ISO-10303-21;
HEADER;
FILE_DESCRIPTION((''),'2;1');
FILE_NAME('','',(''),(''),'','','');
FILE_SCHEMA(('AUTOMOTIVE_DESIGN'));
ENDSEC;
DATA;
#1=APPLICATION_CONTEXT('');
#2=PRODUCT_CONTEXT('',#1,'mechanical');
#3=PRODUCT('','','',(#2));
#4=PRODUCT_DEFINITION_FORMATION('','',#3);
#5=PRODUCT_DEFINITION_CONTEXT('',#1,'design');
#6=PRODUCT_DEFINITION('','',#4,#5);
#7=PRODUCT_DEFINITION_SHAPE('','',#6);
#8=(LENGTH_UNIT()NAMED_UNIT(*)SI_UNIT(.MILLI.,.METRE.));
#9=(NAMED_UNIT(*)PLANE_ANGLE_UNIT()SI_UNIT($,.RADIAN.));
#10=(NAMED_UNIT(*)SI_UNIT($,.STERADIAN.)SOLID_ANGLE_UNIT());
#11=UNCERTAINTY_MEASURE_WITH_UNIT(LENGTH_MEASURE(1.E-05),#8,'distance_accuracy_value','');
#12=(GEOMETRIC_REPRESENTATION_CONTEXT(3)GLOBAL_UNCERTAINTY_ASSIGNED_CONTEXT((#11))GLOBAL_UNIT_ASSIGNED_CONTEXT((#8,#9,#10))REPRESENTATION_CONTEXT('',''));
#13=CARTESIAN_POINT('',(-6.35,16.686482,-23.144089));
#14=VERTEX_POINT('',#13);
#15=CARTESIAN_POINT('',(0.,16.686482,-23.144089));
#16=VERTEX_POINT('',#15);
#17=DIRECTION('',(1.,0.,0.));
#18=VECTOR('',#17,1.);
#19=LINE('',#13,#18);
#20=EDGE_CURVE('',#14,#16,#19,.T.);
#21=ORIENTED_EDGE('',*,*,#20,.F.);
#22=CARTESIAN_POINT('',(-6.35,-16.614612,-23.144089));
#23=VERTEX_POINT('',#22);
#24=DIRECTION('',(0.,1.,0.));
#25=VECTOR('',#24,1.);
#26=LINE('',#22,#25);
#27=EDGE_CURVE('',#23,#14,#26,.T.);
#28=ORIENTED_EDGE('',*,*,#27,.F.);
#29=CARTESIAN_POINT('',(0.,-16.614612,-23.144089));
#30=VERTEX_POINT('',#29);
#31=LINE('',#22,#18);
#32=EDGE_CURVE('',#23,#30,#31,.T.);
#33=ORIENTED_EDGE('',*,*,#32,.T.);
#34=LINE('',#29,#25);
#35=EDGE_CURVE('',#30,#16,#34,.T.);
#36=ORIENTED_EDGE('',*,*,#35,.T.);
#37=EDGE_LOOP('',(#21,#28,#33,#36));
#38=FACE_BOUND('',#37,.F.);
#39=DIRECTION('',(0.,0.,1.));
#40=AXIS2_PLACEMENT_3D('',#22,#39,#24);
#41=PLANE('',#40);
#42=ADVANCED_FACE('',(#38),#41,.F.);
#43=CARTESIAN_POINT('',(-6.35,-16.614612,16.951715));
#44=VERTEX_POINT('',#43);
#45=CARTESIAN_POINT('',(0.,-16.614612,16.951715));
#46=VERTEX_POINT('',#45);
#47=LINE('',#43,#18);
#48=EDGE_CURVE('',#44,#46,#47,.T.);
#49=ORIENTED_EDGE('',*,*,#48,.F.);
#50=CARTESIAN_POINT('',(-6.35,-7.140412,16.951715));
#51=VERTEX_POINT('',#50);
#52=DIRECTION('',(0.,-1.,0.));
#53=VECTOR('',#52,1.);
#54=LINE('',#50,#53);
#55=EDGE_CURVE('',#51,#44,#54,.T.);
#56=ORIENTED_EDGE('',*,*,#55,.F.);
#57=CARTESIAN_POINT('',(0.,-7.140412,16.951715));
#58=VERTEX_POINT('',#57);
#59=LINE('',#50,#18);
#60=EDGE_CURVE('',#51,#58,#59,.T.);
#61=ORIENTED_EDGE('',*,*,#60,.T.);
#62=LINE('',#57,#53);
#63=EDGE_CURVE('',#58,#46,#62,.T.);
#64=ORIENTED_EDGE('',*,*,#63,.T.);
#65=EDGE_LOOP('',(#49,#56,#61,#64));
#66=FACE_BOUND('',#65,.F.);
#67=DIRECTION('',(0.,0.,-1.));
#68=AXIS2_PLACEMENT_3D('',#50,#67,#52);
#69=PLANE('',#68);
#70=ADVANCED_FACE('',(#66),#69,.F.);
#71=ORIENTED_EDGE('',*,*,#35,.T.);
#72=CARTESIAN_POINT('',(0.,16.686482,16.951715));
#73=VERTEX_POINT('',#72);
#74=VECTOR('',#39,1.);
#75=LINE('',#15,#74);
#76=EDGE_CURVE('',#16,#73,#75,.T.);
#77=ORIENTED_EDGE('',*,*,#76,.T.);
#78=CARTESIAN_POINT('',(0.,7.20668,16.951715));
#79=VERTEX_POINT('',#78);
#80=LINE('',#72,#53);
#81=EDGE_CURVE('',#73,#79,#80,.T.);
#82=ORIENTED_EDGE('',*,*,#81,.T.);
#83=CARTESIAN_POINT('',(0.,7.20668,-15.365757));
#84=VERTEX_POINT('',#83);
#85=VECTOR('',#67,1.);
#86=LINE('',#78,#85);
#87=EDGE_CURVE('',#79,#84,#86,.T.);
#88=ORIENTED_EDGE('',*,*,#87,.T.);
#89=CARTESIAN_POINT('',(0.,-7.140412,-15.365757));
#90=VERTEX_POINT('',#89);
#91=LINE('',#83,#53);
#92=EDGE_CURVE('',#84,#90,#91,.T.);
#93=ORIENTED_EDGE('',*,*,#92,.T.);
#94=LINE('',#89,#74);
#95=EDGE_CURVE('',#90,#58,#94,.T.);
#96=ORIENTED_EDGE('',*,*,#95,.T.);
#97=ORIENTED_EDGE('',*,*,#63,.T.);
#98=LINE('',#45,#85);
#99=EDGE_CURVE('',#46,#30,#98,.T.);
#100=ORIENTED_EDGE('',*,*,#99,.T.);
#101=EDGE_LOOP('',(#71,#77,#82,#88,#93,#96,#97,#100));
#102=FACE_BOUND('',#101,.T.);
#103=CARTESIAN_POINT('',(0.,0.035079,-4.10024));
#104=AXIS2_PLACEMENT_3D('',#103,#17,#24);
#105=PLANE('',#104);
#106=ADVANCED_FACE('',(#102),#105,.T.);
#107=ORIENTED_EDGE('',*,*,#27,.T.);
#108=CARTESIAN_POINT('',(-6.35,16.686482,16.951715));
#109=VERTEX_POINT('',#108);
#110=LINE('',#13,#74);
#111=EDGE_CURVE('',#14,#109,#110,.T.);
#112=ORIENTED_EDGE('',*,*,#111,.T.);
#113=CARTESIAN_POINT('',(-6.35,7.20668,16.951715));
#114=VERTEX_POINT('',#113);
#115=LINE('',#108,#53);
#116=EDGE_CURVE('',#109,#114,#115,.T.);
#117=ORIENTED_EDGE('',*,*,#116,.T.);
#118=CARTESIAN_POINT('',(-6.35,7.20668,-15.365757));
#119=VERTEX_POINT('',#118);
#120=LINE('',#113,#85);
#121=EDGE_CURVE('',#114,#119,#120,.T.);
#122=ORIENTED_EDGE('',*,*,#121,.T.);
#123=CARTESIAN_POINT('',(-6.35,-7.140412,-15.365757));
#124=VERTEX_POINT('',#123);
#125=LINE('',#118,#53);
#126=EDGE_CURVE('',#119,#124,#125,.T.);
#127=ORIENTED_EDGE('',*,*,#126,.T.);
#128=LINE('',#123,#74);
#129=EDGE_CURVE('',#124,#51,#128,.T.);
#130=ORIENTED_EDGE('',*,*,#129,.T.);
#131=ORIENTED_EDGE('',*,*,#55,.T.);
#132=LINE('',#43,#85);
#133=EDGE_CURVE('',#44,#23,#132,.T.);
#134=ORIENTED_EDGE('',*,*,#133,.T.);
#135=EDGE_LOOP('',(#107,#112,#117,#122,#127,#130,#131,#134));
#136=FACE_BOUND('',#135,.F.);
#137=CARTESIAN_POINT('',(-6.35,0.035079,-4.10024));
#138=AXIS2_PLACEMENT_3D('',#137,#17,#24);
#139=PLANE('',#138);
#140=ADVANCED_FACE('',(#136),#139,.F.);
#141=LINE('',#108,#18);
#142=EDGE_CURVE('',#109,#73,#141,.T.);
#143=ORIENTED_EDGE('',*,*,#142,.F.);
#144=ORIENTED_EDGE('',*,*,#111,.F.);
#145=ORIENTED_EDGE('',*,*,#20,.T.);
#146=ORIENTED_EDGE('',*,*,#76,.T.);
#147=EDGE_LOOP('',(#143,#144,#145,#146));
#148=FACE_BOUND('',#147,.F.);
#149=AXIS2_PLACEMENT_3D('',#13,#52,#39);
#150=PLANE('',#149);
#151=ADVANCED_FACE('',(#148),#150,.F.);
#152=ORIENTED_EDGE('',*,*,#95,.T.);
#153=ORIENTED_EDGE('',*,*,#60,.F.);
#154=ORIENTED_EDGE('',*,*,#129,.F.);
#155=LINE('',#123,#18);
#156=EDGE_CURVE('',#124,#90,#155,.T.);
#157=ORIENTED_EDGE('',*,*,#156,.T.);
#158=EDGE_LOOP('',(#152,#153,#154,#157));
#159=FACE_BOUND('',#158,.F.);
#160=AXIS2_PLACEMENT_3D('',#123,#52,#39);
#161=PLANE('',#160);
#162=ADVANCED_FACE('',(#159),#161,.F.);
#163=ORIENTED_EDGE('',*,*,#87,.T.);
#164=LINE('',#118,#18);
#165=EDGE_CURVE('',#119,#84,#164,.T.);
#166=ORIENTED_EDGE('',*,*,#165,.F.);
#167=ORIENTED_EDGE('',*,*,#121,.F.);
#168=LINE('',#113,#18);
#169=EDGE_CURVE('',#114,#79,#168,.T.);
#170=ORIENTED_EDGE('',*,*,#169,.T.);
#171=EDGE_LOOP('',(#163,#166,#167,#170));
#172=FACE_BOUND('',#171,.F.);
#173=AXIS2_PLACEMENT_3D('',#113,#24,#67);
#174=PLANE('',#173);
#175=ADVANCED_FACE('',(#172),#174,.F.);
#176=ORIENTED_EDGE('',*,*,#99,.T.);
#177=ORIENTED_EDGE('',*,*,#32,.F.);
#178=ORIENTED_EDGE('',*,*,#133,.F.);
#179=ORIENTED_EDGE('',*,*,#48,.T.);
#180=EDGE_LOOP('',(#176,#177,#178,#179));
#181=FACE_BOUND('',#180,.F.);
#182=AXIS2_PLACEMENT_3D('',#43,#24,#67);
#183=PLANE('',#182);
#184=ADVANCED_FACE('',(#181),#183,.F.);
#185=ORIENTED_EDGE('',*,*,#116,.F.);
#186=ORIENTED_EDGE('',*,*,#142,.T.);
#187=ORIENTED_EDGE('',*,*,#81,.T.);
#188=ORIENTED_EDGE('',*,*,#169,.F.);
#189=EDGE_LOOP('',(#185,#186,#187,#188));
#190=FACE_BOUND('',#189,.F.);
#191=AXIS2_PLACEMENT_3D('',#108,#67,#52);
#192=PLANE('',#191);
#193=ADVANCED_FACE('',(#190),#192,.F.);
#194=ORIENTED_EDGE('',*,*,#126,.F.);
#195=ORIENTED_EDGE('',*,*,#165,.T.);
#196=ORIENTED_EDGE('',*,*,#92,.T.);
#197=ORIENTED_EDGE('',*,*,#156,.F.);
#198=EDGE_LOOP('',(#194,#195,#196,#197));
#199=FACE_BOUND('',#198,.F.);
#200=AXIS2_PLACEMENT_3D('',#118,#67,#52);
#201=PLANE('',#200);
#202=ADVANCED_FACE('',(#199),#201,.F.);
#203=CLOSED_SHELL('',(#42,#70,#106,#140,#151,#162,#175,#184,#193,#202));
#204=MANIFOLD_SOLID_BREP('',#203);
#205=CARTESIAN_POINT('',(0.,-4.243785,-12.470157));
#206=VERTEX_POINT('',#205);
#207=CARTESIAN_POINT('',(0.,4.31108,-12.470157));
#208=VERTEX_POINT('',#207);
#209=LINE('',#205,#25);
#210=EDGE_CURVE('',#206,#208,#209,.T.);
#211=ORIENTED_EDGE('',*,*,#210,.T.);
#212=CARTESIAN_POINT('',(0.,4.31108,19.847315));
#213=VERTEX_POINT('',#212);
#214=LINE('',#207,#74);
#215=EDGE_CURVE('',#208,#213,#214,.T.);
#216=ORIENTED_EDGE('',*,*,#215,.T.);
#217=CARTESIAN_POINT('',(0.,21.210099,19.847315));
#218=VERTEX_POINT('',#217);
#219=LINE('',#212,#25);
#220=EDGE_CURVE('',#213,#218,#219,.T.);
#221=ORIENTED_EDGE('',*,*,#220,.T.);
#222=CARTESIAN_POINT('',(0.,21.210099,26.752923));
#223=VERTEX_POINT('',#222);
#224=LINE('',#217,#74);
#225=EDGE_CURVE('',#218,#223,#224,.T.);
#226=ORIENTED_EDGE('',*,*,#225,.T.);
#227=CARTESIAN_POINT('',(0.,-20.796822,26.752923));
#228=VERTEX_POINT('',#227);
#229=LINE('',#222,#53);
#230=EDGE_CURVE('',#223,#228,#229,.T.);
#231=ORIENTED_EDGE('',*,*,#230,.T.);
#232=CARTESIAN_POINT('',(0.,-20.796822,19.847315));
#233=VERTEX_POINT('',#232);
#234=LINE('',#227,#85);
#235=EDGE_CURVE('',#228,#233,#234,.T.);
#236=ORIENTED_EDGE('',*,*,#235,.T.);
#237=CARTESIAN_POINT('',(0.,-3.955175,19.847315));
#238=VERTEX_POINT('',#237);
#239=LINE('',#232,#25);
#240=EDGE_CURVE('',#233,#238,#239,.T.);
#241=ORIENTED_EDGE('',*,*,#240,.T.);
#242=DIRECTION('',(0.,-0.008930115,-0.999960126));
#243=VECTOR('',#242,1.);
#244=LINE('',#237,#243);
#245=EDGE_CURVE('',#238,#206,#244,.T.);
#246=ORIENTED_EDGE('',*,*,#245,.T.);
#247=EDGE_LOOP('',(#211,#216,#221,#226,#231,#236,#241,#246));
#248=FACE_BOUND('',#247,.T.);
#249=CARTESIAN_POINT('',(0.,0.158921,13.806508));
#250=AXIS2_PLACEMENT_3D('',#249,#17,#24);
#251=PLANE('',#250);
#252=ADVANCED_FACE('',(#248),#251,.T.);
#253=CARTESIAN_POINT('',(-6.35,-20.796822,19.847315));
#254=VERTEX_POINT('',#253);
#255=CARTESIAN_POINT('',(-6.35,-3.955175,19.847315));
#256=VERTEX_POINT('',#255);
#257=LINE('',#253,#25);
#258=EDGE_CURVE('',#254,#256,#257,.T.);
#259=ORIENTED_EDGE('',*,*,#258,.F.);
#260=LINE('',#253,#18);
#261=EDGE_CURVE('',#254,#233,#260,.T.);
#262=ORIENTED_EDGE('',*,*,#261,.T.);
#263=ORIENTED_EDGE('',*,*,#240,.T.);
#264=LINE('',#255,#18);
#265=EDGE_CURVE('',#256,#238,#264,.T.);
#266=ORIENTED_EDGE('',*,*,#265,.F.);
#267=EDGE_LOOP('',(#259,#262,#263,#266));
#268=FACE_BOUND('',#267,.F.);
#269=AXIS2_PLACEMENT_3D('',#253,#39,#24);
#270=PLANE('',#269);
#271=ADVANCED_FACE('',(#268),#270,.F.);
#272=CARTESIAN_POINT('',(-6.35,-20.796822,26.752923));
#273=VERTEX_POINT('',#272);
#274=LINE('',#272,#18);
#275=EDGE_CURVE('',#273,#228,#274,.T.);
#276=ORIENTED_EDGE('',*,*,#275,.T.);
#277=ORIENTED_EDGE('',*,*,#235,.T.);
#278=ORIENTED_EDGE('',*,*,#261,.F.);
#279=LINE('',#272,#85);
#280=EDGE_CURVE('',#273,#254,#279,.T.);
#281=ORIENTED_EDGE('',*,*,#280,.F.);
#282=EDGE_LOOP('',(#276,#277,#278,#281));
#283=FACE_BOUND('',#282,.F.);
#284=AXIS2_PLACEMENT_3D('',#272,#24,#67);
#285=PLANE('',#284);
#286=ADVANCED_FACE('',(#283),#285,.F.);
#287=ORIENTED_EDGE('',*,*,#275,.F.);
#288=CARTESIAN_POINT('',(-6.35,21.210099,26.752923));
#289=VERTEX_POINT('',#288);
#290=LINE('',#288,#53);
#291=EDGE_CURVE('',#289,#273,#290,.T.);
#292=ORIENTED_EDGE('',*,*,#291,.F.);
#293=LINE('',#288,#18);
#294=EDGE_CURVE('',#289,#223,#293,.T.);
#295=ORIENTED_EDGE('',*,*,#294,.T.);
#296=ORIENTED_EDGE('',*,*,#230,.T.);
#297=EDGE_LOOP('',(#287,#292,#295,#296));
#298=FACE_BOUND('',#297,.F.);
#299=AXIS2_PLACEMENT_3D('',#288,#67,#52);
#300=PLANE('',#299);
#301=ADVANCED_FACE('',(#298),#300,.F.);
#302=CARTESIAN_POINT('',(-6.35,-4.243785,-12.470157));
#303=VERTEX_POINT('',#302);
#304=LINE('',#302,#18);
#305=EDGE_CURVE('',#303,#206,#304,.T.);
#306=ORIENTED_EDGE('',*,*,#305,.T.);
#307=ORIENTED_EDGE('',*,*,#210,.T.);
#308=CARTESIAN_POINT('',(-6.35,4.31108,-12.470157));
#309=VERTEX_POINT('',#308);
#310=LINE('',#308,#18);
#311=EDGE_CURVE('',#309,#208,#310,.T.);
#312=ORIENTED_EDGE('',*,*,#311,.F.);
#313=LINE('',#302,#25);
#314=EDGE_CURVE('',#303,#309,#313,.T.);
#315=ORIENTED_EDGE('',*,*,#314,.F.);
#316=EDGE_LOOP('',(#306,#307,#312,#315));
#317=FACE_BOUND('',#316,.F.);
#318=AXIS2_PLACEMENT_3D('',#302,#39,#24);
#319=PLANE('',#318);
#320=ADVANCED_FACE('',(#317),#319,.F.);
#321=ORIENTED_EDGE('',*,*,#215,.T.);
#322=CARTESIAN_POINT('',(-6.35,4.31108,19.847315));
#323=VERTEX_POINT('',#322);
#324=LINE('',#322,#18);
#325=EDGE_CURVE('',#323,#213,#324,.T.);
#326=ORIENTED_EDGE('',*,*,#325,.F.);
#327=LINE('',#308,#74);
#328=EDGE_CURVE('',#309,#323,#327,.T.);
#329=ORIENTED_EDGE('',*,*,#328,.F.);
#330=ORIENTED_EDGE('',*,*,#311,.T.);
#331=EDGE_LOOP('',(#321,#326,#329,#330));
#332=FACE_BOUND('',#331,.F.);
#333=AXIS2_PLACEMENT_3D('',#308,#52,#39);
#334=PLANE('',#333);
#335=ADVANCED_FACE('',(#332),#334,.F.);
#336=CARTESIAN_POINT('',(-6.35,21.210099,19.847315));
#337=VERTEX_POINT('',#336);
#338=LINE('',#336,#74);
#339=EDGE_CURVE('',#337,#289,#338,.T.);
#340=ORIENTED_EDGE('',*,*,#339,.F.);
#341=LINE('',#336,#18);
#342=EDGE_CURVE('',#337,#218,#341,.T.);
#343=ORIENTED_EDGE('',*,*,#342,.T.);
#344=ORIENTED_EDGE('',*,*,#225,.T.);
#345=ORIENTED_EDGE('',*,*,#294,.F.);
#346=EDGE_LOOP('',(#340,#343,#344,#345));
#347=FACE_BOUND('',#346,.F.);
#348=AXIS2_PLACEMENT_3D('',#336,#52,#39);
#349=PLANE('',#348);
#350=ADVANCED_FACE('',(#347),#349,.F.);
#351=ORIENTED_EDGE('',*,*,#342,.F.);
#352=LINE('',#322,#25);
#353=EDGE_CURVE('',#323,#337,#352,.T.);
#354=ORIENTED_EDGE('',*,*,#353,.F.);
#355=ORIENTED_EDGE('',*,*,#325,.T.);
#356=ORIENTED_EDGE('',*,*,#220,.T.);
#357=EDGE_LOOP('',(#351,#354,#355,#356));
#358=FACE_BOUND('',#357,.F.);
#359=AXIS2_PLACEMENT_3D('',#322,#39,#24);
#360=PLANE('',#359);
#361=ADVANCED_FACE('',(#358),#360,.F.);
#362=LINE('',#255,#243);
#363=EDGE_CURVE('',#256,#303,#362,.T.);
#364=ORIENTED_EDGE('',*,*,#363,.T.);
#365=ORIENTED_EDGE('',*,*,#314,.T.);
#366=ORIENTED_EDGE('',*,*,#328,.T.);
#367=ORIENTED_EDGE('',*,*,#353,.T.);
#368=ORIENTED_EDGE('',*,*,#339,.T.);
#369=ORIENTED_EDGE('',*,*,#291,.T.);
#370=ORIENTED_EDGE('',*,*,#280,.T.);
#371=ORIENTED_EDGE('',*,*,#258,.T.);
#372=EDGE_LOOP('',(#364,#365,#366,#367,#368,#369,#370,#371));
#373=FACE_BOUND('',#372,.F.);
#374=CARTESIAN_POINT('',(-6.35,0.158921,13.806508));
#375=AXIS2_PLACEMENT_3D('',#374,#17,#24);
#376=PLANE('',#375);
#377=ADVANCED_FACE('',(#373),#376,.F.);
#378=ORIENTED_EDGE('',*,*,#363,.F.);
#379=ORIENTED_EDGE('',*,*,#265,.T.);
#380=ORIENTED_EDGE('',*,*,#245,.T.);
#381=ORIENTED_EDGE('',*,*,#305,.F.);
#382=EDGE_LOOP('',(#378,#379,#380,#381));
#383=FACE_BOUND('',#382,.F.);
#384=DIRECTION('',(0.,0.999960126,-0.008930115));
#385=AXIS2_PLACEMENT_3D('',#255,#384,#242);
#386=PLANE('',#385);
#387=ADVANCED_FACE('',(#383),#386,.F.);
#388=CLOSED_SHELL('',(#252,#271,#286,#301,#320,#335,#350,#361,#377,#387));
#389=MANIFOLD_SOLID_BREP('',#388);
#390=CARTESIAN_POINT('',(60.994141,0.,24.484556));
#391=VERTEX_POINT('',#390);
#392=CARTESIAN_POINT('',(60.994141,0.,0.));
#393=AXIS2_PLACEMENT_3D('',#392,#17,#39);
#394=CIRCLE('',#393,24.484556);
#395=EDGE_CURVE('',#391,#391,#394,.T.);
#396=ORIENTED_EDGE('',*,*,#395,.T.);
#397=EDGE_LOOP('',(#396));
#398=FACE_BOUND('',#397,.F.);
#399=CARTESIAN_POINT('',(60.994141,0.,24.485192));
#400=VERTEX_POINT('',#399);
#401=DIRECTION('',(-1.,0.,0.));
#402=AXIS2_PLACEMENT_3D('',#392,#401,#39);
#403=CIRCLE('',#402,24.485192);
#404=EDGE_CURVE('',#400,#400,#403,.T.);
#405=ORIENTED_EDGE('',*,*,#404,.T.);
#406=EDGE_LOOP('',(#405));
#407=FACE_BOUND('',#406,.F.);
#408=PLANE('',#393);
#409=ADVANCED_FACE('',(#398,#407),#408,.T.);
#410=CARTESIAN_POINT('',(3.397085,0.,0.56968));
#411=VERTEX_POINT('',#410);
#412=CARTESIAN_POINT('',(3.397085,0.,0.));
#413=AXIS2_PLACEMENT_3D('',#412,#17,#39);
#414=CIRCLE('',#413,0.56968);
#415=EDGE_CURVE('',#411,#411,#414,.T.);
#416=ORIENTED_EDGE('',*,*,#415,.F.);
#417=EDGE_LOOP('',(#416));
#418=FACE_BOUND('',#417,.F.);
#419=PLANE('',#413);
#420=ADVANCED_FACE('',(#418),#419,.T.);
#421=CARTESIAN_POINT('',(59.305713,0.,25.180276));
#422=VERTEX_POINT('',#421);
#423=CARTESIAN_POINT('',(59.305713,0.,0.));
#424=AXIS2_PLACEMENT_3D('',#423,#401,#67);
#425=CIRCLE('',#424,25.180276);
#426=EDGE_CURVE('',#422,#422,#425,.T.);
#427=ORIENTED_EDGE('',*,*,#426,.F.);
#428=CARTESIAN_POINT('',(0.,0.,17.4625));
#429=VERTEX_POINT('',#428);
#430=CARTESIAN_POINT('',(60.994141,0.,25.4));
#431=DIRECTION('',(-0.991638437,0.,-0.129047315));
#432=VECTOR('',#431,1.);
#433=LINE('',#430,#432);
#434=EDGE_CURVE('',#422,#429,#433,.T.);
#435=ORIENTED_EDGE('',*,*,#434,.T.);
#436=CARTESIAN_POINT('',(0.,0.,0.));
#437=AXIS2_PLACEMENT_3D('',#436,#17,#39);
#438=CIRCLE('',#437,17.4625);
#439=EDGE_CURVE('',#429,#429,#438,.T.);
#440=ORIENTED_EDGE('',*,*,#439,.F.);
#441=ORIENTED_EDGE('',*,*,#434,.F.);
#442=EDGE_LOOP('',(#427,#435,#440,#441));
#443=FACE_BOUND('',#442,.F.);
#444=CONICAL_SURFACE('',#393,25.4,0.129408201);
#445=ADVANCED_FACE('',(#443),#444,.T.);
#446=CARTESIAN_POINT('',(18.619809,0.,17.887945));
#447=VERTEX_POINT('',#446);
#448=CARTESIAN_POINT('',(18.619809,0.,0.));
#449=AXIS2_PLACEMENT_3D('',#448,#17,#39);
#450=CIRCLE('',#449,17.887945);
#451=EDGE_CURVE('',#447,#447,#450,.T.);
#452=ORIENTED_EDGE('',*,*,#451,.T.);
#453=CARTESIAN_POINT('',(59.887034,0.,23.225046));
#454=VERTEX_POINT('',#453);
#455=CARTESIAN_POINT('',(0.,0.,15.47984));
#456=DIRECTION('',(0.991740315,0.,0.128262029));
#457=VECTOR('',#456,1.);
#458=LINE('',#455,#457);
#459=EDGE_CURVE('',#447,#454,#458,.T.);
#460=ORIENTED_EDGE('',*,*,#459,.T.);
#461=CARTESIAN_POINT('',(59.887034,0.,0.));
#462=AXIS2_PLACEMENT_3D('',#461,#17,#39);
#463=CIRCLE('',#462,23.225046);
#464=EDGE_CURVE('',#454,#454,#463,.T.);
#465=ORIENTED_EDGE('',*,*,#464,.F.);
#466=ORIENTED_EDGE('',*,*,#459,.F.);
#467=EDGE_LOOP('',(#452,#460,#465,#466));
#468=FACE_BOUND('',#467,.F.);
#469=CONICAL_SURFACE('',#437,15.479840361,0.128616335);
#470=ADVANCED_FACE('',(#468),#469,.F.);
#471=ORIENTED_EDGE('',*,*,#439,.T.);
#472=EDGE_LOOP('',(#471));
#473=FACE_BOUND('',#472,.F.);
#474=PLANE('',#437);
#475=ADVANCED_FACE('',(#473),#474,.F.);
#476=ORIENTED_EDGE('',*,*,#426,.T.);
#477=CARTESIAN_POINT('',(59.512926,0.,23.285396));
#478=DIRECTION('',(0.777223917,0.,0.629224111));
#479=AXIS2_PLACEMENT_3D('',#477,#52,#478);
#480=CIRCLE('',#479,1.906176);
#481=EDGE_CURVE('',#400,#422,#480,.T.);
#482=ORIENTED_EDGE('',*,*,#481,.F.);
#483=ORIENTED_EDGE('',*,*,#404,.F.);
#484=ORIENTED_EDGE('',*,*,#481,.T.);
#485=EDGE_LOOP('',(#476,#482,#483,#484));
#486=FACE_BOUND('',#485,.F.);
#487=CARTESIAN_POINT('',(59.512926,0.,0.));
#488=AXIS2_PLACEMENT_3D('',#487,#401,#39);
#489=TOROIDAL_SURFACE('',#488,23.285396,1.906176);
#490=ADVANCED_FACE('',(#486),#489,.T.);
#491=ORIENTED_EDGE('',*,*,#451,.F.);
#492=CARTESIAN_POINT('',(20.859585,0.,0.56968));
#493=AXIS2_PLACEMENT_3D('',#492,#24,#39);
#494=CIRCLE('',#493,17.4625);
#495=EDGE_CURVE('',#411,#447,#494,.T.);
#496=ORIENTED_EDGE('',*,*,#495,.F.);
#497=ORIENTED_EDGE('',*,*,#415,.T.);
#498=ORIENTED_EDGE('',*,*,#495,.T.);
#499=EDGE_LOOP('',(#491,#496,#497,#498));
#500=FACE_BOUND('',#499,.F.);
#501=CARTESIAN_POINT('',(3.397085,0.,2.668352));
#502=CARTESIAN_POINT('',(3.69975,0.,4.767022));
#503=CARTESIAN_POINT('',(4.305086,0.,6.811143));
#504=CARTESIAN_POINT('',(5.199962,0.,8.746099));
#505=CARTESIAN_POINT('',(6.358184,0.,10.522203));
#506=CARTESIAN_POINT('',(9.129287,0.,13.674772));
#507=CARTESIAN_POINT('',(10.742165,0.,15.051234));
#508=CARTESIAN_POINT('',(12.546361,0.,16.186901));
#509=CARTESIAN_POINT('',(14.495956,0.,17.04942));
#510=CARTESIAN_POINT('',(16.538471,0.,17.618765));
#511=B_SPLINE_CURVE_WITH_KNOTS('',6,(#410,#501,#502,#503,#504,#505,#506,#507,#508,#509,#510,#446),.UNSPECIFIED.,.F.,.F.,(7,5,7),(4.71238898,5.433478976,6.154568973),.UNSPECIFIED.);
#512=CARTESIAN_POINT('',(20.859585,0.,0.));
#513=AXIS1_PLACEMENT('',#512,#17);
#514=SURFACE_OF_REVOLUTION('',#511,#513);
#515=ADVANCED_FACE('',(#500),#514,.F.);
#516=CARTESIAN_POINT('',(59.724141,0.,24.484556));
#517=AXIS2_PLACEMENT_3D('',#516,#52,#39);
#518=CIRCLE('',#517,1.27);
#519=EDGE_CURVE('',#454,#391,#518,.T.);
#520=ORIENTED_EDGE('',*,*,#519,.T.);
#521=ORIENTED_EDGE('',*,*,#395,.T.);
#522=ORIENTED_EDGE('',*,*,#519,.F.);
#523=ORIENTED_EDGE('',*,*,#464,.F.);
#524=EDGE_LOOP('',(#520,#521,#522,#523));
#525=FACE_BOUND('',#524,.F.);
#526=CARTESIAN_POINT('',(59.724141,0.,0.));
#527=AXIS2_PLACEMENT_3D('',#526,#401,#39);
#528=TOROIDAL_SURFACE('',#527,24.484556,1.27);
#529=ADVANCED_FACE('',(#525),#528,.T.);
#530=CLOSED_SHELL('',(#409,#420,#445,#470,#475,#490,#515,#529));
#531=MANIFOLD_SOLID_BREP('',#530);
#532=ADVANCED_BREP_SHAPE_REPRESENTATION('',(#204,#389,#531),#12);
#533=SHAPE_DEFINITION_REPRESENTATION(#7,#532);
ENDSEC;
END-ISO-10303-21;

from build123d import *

# Parameters (mm, degrees)
F2_R     = 17.4625
F3_R     = 1.27
F7_DEPTH = 6.35


# Not quite as in the source:
# - a fillet or chamfer that OpenCascade refuses, or shapes differently, is made with other operations: its cross-section is extruded or revolved along the edge and cut away or added


with BuildPart() as f1:
    # F0 (on Front) → F1 (revolve)
    with BuildSketch(Plane.XZ):
        Polygon((0, 17.4625), (0, 15.4798403605), (3.3970845398, 15.9191861749), (60.9941408038, 23.3682282269), (60.9941408038, 25.4), align=None)
        Polygon((3.3970845398, 15.9191861749), (0, 15.4798403605), (0, 0), (3.3970845398, 0), align=None)
    revolve(axis=Axis((30.1625, 0, 0), (1, 0, 0)))

    # F2
    f2_edges = [f1.edges().sort_by_distance(p)[0] for p in [
        (3.397085, 0, -15.919186),
    ]]
    fillet(f2_edges, radius=F2_R)

    # F3
    f3_edges = [f1.edges().sort_by_distance(p)[0] for p in [
        (60.994141, 0, -23.368228),
    ]]
    fillet(f3_edges, radius=F3_R)

    # F4: fillet of radius 1.905 on 1 edges, made by hand

    # F4_s1 → F4_t2 (revolve, cut)
    with BuildSketch(Plane.XZ):
        with BuildLine():
            ThreePointArc((60.9944516934, 24.4848076553), (60.2207035097, 25.0552991923), (59.2669390878, 25.1756331992))
            Line((59.2669390878, 25.1756331992), (59.2423403965, 25.3646569527))
            ThreePointArc((59.2423403965, 25.3646569527), (60.1059670639, 25.4766420254), (60.9695421125, 25.5890237535))
            Line((60.9695421125, 25.5890237535), (61.1847584185, 25.4))
            ThreePointArc((61.1847584185, 25.4), (61.1847584185, 24.9424038276), (61.1426042626, 24.6047488544))
            Line((61.1426042626, 24.6047488544), (60.9944516934, 24.4848076553))
        make_face()
    revolve(axis=Axis((60.9941408038, 0, 0), (1, 0, 0)), mode=Mode.SUBTRACT)


with BuildPart() as f7:
    # F6 (on offset) → F7 (new body)
    with BuildSketch(Plane.YZ.offset(-6.35)):
        Polygon((-16.6146121919, -23.1440894544), (16.686482355, -23.1440894544), (16.686482355, 16.9517148048), (7.2066797875, 16.9517148048), (7.2066797875, -15.3657568857), (-7.1404121919, -15.3657568857), (-7.1404121919, 16.9517148048), (-16.6146121919, 16.9517148048), align=None)
    extrude(amount=F7_DEPTH)


with BuildPart() as f7b:
    # F6 (on offset) → F7, piece 2 (new body)
    with BuildSketch(Plane.YZ.offset(-6.35)):
        Polygon((21.2100986391, 26.752922684), (-20.796822384, 26.752922684), (-20.796822384, 19.8473148048), (-3.9551745407, 19.8473148048), (-4.2437847807, -12.4701568857), (4.3110797875, -12.4701568857), (4.3110797875, 19.8473148048), (21.2100986391, 19.8473148048), align=None)
    extrude(amount=F7_DEPTH)


solid = Compound([f1.part, f7.part, f7b.part])
